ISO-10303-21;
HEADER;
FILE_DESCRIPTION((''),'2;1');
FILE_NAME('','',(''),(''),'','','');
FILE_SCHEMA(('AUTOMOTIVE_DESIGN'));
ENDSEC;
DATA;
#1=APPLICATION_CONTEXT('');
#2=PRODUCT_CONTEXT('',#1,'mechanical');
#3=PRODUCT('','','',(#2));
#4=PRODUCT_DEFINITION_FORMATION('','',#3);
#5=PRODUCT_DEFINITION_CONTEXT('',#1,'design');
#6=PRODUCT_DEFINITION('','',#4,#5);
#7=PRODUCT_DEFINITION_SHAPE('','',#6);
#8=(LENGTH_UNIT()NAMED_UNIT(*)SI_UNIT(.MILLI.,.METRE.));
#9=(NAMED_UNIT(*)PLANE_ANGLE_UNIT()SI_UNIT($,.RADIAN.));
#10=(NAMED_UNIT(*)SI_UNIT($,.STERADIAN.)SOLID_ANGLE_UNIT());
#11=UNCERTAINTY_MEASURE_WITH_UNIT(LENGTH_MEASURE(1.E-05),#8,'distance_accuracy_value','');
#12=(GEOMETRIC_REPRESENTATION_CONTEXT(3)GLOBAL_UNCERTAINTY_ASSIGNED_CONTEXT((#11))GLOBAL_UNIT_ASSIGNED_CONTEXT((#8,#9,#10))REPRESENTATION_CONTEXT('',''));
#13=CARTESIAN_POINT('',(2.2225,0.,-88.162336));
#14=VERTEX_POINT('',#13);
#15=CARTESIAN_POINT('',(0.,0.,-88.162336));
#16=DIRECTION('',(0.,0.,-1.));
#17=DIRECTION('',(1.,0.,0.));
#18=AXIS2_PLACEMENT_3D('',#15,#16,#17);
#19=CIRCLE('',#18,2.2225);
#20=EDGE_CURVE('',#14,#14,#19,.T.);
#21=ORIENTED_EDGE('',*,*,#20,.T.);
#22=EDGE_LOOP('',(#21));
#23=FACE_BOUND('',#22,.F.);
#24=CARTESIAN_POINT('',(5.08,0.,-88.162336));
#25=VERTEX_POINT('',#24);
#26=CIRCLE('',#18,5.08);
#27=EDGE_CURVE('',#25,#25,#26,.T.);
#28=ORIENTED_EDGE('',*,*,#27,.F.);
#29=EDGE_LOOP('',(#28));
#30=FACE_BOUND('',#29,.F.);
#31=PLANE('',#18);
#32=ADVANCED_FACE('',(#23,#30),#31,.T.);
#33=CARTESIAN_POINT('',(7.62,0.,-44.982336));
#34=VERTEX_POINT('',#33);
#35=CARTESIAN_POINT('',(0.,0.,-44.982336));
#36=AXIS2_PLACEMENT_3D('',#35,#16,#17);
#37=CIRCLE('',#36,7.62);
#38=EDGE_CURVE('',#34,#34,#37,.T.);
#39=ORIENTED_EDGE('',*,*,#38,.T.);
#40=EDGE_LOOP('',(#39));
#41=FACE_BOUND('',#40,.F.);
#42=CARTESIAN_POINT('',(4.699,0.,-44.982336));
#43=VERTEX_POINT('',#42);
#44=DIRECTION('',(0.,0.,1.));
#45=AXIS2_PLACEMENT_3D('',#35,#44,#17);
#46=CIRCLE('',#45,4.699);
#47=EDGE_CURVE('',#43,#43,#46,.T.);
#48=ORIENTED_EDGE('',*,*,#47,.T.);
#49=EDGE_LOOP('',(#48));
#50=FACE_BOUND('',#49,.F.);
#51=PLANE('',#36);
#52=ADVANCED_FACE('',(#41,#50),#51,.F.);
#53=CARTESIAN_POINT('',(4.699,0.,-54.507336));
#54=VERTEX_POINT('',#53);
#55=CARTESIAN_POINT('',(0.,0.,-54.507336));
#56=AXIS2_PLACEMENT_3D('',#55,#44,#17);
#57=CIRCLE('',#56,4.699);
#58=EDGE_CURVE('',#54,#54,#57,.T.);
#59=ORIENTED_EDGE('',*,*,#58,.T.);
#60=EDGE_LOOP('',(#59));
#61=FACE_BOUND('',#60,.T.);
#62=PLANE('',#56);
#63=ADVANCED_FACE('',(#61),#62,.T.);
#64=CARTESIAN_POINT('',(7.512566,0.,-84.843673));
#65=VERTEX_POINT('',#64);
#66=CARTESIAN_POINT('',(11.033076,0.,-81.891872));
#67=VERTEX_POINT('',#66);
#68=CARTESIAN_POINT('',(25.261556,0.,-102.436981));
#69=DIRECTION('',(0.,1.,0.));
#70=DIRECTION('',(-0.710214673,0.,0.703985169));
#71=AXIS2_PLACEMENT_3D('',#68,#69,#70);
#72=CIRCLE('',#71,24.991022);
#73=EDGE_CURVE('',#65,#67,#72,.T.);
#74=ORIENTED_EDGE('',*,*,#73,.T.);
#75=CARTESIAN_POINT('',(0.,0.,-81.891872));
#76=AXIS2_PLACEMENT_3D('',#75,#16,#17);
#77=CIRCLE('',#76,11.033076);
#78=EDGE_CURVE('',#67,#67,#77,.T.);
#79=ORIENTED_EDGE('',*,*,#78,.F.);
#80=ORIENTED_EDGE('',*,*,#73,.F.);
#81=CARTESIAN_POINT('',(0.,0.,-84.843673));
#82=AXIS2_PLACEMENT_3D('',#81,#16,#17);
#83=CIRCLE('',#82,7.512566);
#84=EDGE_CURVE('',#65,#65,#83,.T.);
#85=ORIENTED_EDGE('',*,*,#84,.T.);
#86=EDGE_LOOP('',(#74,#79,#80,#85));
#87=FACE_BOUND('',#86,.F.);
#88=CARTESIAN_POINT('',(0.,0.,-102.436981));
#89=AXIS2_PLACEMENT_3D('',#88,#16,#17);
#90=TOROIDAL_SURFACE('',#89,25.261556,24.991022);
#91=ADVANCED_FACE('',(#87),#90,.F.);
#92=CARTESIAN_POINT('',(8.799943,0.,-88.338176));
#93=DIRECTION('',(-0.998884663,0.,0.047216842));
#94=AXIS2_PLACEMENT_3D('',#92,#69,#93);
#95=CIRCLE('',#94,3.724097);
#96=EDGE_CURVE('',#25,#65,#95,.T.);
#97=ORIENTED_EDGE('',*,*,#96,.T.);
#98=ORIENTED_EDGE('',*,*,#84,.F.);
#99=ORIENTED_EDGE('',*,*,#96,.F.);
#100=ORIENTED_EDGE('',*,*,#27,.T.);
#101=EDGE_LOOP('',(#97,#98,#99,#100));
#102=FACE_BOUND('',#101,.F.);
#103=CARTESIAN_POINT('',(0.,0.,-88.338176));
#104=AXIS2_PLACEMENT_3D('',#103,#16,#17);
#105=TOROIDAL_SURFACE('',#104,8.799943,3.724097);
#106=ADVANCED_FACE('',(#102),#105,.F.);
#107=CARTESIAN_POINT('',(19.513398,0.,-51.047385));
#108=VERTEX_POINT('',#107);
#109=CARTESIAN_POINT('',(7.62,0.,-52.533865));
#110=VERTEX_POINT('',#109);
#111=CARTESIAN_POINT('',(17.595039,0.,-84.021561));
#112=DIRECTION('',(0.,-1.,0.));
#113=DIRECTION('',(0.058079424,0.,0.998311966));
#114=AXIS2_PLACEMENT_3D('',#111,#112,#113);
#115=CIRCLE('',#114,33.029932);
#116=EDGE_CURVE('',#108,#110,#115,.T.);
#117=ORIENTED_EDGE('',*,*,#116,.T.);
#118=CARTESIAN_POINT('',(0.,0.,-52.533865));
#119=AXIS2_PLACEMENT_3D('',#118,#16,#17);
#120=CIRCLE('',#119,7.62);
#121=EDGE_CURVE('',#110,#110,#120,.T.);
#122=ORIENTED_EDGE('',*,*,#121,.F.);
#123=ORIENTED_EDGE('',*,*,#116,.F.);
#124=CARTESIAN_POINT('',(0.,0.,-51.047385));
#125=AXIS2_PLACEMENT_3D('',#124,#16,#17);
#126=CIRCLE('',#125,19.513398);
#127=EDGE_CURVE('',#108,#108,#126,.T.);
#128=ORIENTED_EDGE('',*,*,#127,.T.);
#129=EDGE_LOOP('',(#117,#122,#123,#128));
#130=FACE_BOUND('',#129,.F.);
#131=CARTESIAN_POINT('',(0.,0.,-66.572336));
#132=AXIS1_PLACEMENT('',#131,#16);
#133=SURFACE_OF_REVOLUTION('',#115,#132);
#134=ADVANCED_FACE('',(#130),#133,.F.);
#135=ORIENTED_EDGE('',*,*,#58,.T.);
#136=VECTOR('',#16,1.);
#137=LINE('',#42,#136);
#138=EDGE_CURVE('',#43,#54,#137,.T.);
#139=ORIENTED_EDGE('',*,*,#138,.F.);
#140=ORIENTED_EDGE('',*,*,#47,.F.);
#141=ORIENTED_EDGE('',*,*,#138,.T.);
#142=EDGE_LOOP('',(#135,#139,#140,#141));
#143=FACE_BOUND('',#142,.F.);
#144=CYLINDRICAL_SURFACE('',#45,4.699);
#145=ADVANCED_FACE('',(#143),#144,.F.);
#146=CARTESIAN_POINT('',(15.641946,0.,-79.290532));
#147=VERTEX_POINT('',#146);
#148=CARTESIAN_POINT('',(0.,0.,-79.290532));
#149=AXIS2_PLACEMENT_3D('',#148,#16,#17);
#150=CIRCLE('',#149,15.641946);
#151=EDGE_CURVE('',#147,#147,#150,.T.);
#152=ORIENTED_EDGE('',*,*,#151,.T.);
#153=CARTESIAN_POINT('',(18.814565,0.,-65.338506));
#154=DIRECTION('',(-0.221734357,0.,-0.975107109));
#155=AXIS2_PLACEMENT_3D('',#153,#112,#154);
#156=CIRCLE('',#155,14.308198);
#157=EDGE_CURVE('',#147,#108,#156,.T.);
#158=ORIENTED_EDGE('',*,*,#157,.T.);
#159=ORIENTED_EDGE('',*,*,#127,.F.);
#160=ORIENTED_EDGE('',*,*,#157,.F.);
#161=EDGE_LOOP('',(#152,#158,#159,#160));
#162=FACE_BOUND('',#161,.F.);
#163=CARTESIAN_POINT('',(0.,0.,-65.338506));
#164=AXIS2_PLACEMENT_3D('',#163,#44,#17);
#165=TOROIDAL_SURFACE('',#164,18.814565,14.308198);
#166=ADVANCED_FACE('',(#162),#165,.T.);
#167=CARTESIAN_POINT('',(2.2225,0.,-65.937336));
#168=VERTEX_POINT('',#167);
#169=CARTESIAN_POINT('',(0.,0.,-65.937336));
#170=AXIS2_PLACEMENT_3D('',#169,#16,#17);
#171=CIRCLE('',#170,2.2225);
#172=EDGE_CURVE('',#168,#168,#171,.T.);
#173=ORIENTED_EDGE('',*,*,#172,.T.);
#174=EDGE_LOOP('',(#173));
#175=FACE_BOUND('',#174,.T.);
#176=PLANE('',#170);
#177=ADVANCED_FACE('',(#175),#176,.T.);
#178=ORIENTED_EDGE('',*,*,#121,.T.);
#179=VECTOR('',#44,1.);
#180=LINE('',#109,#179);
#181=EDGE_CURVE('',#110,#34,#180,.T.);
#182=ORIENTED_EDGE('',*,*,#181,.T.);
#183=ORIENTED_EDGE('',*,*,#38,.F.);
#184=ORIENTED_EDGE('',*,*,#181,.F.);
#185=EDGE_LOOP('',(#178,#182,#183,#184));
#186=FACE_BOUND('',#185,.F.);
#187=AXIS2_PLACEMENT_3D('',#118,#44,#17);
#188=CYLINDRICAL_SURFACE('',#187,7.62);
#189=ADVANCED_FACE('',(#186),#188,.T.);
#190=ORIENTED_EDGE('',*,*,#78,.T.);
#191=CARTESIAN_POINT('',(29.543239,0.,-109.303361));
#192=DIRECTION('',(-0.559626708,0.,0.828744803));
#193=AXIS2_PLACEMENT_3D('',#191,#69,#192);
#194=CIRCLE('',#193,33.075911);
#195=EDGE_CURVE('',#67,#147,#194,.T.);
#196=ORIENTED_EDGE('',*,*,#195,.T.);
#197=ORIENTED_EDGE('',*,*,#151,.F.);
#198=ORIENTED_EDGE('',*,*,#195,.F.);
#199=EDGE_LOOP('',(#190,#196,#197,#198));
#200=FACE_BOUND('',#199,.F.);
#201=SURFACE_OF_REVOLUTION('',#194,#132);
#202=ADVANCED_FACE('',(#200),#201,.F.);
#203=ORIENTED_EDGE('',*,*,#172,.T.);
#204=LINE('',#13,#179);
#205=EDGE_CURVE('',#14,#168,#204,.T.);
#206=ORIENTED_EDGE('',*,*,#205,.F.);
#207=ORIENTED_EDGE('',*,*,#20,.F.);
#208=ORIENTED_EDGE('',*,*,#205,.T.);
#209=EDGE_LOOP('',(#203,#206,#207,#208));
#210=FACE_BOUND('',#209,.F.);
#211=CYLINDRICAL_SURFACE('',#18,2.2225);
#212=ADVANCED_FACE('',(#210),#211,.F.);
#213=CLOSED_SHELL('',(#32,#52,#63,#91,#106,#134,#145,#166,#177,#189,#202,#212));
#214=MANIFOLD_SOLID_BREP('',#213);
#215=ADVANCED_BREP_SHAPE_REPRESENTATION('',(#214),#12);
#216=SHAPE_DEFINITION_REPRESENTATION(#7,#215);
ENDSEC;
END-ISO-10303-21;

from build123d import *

# Parameters (mm, degrees)
F2_R        = 4.699
F3_DEPTH    = 9.525
F4_R        = 2.2225
F1_FACE_R   = 7.62
F1_FACE_R_2 = 4.699
F5_DEPTH    = 22.225


# Not quite as in the source:
# - a feature names something its author has since deleted; it is built from what else it names


with BuildPart() as f1:
    # F0 (on Front) → F1 (revolve)
    with BuildSketch(Plane.XZ):
        with BuildLine():
            ThreePointArc((11.0330758616, -81.8918719888), (13.2853990557, -80.4988733509), (15.6419463456, -79.2905315757))
            ThreePointArc((15.6419463456, -79.2905315757), (32.9902043329, -67.2816433685), (19.5133984089, -51.0473847389))
            ThreePointArc((19.5133984089, -51.0473847389), (13.498708034, -51.2466242985), (7.62, -52.533864975))
            Line((7.62, -52.533864975), (7.62, -44.9823363346))
            Line((7.62, -44.9823363346), (0, -44.9823363346))
            Line((0, -44.9823363346), (0, -88.1623363346))
            Line((0, -88.1623363346), (5.08, -88.1623363346))
            ThreePointArc((5.08, -88.1623363346), (5.7963291238, -86.1365407799), (7.512565547, -84.843672812))
            ThreePointArc((7.512565547, -84.843672812), (9.2048459257, -83.286701243), (11.0330758616, -81.8918719888))
        make_face()
    revolve(axis=Axis((0, 0, -66.5723363346), (0, 0, -1)))

    # F2 (on face) → F3 (cut)
    with BuildSketch(Plane.XY.offset(-44.9823363346)):
        Circle(F2_R)
    extrude(amount=-F3_DEPTH, mode=Mode.SUBTRACT)

    # F4 (on face) + F1_face (on face) → F5 (cut)
    with BuildSketch(Plane(origin=(0, 0, -88.1623363346), x_dir=(1, 0, 0), z_dir=(0, 0, -1))):
        Circle(F4_R)
    with BuildSketch(Plane.XY.offset(-44.9823363346)):
        Circle(F1_FACE_R)
        Circle(F1_FACE_R_2, mode=Mode.SUBTRACT)
    extrude(amount=-F5_DEPTH, dir=(0, 0, -1), mode=Mode.SUBTRACT)


solid = f1.part
